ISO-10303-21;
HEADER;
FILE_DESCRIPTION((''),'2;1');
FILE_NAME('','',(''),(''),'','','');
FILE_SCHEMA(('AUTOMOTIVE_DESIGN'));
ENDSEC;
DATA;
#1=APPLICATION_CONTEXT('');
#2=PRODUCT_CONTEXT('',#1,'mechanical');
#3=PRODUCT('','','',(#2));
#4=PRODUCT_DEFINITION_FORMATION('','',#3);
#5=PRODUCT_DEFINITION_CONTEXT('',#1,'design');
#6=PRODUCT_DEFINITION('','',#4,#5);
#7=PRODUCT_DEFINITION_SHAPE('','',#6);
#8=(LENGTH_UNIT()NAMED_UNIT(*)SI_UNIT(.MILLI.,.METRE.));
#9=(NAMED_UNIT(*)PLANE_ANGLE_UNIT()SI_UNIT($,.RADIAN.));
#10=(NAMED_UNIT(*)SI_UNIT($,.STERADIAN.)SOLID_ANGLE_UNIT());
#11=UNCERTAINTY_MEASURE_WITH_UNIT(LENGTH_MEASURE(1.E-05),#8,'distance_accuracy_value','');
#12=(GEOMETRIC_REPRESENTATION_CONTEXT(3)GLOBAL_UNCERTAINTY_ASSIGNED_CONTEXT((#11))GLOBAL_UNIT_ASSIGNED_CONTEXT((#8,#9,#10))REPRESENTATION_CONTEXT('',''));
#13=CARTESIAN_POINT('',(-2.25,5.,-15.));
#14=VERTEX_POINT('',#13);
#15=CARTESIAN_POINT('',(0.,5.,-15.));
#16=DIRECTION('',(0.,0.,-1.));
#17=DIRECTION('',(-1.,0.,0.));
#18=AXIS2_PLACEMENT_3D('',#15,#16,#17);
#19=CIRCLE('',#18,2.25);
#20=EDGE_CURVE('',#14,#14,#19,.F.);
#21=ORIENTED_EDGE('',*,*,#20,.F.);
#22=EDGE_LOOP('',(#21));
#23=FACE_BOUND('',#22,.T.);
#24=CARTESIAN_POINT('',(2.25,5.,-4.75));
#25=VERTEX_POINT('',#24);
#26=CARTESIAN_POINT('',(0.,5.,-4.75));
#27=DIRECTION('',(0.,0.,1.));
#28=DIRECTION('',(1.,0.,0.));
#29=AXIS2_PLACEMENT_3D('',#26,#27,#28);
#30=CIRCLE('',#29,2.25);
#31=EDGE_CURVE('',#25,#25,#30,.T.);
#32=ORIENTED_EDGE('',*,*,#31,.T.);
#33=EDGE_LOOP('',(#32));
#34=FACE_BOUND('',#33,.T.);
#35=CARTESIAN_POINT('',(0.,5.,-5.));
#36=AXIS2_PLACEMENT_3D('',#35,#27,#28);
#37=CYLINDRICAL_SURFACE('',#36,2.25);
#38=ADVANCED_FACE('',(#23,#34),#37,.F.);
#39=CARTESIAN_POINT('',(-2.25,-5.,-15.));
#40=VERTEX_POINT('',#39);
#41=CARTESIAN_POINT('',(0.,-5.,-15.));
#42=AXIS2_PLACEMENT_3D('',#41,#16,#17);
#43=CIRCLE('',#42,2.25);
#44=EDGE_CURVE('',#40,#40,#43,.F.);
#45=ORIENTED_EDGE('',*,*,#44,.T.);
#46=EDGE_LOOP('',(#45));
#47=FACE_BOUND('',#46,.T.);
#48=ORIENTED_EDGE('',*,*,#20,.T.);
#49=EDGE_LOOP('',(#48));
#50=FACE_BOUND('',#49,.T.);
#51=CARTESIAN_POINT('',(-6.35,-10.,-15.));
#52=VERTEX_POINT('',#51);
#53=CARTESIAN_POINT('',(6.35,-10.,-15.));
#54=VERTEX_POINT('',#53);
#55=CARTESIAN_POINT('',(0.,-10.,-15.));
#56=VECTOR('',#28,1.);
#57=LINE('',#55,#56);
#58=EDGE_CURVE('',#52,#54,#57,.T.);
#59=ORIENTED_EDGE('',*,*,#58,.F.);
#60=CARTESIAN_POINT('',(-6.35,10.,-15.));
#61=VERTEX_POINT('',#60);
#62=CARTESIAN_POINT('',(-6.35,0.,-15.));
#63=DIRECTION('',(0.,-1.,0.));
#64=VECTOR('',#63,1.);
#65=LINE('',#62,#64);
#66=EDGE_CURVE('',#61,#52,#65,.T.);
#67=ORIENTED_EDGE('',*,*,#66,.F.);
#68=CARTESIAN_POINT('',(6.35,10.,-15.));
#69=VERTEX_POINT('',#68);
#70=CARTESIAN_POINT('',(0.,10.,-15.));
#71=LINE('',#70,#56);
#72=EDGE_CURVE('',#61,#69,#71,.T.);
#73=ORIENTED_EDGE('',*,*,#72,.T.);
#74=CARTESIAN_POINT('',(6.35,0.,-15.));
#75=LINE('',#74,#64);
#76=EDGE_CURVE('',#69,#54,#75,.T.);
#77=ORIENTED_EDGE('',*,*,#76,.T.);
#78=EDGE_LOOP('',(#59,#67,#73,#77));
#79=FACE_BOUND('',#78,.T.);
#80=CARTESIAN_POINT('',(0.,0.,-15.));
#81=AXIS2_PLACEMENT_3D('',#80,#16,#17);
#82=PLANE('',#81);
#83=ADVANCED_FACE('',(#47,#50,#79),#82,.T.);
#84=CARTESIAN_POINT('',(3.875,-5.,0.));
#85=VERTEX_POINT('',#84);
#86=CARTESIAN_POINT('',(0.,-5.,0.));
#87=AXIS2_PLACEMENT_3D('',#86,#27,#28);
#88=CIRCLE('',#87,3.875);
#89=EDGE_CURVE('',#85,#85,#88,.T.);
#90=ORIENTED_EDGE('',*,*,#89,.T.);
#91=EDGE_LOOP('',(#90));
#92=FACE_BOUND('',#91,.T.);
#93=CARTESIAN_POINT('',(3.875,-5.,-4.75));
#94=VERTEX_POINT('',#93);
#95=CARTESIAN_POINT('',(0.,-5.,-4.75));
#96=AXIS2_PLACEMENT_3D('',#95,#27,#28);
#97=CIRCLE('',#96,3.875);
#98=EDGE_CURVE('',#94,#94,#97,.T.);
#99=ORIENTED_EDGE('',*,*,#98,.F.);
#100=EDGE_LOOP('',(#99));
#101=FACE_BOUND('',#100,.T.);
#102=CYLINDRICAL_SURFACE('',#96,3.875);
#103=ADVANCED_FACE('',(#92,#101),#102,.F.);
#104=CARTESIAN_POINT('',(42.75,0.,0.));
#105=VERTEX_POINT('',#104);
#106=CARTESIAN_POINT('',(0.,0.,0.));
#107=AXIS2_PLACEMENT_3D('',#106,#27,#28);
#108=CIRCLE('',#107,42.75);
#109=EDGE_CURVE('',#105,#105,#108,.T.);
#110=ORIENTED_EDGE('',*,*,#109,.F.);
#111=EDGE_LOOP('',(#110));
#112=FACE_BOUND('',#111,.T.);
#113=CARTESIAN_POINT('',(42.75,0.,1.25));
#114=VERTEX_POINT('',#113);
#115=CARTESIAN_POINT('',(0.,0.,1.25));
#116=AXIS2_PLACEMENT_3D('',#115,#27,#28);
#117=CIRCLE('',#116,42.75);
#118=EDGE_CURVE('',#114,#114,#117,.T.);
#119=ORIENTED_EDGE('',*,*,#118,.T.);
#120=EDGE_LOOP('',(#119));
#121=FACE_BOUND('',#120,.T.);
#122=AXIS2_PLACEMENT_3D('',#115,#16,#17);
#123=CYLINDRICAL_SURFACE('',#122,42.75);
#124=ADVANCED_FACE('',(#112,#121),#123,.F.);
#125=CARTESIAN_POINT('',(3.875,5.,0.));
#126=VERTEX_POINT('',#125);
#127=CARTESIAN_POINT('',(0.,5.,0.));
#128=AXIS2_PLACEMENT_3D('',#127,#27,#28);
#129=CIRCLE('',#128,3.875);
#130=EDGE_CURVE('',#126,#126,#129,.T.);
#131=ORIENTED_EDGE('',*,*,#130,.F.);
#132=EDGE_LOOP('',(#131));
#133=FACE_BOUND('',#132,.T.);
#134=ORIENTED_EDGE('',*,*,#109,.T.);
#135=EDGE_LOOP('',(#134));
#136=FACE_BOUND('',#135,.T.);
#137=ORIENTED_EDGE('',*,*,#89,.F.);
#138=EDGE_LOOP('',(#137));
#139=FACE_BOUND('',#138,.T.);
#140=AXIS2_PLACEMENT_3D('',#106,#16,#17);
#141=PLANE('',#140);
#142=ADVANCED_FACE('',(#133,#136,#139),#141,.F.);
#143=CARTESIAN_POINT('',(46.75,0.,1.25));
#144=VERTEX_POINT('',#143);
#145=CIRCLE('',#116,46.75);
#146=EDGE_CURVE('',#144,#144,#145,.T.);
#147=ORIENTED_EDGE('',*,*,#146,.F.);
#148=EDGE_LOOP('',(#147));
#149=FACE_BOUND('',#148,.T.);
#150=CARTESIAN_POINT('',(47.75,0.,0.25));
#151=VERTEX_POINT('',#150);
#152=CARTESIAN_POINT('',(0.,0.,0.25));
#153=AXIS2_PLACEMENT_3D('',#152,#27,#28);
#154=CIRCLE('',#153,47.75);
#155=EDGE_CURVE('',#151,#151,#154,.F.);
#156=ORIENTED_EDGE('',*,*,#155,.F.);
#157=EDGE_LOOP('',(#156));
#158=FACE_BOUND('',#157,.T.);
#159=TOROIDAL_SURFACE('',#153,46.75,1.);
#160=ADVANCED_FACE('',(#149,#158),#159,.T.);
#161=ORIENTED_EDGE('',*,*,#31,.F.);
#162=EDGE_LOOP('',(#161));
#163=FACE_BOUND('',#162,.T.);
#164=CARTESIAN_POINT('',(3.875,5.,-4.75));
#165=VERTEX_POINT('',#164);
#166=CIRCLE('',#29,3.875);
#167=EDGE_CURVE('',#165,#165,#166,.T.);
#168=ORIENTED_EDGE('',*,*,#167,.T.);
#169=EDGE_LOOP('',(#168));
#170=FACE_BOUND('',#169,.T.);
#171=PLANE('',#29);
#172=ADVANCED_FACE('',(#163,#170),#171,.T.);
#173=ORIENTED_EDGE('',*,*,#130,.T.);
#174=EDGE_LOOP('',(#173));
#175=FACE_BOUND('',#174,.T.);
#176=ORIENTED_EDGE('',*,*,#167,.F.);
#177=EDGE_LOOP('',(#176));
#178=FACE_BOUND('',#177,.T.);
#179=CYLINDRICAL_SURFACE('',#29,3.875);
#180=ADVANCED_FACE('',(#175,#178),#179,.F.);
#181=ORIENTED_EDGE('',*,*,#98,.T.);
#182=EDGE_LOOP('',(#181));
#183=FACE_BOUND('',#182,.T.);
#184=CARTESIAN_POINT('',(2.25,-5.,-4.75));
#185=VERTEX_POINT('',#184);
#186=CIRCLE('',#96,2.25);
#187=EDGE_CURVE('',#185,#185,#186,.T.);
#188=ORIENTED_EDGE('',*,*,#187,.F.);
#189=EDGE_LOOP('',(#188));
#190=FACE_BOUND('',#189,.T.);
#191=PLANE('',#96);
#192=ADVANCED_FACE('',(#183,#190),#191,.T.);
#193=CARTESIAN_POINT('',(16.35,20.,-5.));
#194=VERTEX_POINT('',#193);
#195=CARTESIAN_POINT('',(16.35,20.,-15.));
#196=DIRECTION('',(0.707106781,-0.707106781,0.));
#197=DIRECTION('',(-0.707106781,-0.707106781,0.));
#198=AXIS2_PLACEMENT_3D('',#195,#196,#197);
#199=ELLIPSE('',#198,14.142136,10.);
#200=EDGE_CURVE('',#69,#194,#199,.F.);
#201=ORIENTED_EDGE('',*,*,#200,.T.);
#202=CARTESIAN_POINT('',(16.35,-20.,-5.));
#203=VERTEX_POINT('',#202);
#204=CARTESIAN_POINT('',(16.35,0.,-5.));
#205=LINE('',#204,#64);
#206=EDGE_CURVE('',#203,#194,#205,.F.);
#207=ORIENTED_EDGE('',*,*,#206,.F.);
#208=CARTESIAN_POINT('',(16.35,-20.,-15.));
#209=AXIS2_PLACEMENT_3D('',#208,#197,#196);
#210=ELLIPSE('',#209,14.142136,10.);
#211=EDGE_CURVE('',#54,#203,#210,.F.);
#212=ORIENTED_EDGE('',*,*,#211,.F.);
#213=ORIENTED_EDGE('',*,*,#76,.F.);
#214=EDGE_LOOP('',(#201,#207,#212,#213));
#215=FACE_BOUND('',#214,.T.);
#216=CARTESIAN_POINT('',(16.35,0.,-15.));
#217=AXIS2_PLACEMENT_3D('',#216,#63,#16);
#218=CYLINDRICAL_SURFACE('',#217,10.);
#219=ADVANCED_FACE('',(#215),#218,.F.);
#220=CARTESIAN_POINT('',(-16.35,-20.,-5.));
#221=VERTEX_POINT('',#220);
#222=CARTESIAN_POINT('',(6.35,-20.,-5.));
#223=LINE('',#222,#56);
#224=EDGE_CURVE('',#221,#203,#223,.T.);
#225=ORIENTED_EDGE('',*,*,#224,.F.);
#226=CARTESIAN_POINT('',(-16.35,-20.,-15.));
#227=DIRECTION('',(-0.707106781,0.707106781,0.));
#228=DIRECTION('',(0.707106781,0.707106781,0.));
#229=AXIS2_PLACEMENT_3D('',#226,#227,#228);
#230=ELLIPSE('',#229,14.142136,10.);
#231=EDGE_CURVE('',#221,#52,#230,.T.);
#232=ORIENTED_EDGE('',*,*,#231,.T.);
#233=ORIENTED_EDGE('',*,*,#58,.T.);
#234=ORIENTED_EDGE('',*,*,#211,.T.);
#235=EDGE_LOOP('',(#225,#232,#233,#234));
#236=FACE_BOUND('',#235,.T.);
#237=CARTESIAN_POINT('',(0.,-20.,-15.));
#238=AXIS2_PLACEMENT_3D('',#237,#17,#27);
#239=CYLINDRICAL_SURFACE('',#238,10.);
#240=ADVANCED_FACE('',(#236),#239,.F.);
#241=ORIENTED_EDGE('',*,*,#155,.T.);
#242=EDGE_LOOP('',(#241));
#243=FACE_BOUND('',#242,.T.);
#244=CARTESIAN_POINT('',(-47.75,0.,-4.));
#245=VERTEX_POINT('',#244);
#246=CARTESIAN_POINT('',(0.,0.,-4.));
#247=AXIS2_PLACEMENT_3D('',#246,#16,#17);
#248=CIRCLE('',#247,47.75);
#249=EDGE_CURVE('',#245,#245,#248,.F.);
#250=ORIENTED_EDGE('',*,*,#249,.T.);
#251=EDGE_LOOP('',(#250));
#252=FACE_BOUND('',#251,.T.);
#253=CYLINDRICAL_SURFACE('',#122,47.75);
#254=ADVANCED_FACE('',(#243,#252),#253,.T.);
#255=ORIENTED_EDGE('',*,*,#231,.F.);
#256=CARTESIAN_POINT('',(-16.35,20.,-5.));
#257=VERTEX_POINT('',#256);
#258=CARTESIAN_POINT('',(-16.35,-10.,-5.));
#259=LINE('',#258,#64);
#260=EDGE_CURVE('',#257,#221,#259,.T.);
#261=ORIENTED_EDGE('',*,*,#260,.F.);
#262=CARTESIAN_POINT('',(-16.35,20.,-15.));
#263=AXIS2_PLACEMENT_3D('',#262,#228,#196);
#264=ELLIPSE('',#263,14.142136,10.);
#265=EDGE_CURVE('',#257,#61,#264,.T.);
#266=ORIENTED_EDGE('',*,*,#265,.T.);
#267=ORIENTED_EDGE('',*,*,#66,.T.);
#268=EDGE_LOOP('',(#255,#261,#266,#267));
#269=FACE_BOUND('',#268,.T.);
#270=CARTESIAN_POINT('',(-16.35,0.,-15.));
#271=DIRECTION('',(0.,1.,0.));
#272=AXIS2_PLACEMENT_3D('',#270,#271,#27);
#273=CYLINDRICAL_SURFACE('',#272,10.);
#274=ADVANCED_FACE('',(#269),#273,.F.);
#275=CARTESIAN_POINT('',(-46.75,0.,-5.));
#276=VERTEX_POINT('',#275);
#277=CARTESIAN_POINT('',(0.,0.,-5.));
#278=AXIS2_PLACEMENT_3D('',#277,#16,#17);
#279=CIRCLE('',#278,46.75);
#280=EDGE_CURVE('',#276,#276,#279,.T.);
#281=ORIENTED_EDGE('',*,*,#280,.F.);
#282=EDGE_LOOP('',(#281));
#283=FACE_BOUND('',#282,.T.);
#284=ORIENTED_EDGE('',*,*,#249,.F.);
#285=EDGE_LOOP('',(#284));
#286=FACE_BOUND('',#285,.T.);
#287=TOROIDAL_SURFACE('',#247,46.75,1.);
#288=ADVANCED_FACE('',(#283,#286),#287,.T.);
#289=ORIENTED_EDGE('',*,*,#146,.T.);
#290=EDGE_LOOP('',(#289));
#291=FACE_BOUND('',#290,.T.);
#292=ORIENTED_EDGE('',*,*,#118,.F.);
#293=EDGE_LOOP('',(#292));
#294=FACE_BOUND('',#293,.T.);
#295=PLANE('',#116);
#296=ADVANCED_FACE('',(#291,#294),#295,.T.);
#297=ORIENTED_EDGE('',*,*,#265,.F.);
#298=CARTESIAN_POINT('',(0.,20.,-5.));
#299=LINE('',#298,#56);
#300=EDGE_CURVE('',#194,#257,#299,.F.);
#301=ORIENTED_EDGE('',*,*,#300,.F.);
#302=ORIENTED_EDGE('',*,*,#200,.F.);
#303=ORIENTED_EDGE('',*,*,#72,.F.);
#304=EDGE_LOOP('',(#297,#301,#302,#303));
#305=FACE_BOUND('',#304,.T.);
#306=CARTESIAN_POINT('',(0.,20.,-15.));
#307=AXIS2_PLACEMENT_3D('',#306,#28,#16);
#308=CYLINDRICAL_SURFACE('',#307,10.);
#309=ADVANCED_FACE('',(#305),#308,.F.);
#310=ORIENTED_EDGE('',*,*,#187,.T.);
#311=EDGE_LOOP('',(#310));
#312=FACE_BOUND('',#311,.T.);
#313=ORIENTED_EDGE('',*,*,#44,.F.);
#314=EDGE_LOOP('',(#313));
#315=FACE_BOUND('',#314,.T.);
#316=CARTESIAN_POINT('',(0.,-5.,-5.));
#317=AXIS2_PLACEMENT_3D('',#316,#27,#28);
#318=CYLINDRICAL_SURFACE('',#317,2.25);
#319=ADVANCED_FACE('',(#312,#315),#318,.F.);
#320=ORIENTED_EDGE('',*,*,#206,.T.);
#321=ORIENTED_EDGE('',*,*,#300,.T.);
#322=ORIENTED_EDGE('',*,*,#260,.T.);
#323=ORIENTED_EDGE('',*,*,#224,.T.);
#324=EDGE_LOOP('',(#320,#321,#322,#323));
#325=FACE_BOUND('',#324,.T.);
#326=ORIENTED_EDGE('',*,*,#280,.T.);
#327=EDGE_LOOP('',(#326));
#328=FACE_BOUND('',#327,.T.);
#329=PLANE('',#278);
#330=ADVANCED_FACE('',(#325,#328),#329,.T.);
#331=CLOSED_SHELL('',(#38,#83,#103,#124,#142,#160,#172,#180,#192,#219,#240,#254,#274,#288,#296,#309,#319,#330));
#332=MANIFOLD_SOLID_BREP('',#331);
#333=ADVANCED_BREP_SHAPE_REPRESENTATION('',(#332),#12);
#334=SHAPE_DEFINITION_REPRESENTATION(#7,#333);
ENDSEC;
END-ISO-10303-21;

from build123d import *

# Parameters (mm, degrees)
SKETCH1_R           = 47.75
SKETCH1_R_2         = 42.75
BOSS_EXTRUDE1_DEPTH = 1.25
BOSS_EXTRUDE2_START = 5
SKETCH2_R           = 47.75
SKETCH2_R_2         = 2.25
BOSS_EXTRUDE2_DEPTH = 5
SKETCH3_R           = 3.875
CUT_EXTRUDE1_DEPTH  = 4.75
BOSS_EXTRUDE3_START = 10
SKETCH4_W           = 12.7
SKETCH4_H           = 20
SKETCH4_R           = 2.25
BOSS_EXTRUDE3_DEPTH = 10
FILLET1_R           = 10
FILLET2_R           = 1


with BuildPart() as part:
    # Sketch1 → Boss-Extrude1 (new body)
    with BuildSketch(Plane(origin=(0, 0, 0), x_dir=(0, 1, 0), z_dir=(0, 0, 1))):
        with Locations(Location((0, 0, 0), (0, 0, 270))):
            Circle(SKETCH1_R)
        with Locations(Location((0, 0, 0), (0, 0, 270))):
            Circle(SKETCH1_R_2, mode=Mode.SUBTRACT)
    extrude(amount=BOSS_EXTRUDE1_DEPTH)

    # Sketch2 → Boss-Extrude2 (add)
    with BuildSketch(Plane(origin=(0, 0, 0), x_dir=(1, 0, 0), z_dir=(0, 0, -1)).offset(BOSS_EXTRUDE2_START)):
        with Locations(Location((0, 0, 0), (0, 0, 180))):
            Circle(SKETCH2_R)
        with Locations(Location((0, 5, 0), (0, 0, 180))):
            Circle(SKETCH2_R_2, mode=Mode.SUBTRACT)
        with Locations(Location((0, -5, 0), (0, 0, 180))):
            Circle(SKETCH2_R_2, mode=Mode.SUBTRACT)
    extrude(amount=-BOSS_EXTRUDE2_DEPTH)

    # Sketch3 → Cut-Extrude1 (cut)
    with BuildSketch(Plane.XY):
        with Locations((0, 5)):
            Circle(SKETCH3_R)
        with Locations((0, -5)):
            Circle(SKETCH3_R)
    extrude(amount=-CUT_EXTRUDE1_DEPTH, mode=Mode.SUBTRACT)

    # Sketch4 → Boss-Extrude3 (add)
    with BuildSketch(Plane(origin=(0, 0, -5), x_dir=(1, 0, 0), z_dir=(0, 0, -1)).offset(BOSS_EXTRUDE3_START)):
        Rectangle(SKETCH4_W, SKETCH4_H)
        with Locations((0, 5)):
            Circle(SKETCH4_R, mode=Mode.SUBTRACT)
        with Locations((0, -5)):
            Circle(SKETCH4_R, mode=Mode.SUBTRACT)
    extrude(amount=-BOSS_EXTRUDE3_DEPTH)

    # Fillet1
    fillet1_edges = [part.edges().sort_by_distance(p)[0] for p in [
        (0, -10, -5),
        (-6.35, 0, -5),
        (0, 10, -5),
        (6.35, 0, -5),
    ]]
    fillet(fillet1_edges, radius=FILLET1_R - 0.0001)  # a hair under: the kernel refuses the full size

    # Fillet2
    fillet2_edges = [part.edges().sort_by_distance(p)[0] for p in [
        (47.75, 0, -5),
        (-47.75, 0, 1.25),
    ]]
    fillet(fillet2_edges, radius=FILLET2_R)


solid = part.part
